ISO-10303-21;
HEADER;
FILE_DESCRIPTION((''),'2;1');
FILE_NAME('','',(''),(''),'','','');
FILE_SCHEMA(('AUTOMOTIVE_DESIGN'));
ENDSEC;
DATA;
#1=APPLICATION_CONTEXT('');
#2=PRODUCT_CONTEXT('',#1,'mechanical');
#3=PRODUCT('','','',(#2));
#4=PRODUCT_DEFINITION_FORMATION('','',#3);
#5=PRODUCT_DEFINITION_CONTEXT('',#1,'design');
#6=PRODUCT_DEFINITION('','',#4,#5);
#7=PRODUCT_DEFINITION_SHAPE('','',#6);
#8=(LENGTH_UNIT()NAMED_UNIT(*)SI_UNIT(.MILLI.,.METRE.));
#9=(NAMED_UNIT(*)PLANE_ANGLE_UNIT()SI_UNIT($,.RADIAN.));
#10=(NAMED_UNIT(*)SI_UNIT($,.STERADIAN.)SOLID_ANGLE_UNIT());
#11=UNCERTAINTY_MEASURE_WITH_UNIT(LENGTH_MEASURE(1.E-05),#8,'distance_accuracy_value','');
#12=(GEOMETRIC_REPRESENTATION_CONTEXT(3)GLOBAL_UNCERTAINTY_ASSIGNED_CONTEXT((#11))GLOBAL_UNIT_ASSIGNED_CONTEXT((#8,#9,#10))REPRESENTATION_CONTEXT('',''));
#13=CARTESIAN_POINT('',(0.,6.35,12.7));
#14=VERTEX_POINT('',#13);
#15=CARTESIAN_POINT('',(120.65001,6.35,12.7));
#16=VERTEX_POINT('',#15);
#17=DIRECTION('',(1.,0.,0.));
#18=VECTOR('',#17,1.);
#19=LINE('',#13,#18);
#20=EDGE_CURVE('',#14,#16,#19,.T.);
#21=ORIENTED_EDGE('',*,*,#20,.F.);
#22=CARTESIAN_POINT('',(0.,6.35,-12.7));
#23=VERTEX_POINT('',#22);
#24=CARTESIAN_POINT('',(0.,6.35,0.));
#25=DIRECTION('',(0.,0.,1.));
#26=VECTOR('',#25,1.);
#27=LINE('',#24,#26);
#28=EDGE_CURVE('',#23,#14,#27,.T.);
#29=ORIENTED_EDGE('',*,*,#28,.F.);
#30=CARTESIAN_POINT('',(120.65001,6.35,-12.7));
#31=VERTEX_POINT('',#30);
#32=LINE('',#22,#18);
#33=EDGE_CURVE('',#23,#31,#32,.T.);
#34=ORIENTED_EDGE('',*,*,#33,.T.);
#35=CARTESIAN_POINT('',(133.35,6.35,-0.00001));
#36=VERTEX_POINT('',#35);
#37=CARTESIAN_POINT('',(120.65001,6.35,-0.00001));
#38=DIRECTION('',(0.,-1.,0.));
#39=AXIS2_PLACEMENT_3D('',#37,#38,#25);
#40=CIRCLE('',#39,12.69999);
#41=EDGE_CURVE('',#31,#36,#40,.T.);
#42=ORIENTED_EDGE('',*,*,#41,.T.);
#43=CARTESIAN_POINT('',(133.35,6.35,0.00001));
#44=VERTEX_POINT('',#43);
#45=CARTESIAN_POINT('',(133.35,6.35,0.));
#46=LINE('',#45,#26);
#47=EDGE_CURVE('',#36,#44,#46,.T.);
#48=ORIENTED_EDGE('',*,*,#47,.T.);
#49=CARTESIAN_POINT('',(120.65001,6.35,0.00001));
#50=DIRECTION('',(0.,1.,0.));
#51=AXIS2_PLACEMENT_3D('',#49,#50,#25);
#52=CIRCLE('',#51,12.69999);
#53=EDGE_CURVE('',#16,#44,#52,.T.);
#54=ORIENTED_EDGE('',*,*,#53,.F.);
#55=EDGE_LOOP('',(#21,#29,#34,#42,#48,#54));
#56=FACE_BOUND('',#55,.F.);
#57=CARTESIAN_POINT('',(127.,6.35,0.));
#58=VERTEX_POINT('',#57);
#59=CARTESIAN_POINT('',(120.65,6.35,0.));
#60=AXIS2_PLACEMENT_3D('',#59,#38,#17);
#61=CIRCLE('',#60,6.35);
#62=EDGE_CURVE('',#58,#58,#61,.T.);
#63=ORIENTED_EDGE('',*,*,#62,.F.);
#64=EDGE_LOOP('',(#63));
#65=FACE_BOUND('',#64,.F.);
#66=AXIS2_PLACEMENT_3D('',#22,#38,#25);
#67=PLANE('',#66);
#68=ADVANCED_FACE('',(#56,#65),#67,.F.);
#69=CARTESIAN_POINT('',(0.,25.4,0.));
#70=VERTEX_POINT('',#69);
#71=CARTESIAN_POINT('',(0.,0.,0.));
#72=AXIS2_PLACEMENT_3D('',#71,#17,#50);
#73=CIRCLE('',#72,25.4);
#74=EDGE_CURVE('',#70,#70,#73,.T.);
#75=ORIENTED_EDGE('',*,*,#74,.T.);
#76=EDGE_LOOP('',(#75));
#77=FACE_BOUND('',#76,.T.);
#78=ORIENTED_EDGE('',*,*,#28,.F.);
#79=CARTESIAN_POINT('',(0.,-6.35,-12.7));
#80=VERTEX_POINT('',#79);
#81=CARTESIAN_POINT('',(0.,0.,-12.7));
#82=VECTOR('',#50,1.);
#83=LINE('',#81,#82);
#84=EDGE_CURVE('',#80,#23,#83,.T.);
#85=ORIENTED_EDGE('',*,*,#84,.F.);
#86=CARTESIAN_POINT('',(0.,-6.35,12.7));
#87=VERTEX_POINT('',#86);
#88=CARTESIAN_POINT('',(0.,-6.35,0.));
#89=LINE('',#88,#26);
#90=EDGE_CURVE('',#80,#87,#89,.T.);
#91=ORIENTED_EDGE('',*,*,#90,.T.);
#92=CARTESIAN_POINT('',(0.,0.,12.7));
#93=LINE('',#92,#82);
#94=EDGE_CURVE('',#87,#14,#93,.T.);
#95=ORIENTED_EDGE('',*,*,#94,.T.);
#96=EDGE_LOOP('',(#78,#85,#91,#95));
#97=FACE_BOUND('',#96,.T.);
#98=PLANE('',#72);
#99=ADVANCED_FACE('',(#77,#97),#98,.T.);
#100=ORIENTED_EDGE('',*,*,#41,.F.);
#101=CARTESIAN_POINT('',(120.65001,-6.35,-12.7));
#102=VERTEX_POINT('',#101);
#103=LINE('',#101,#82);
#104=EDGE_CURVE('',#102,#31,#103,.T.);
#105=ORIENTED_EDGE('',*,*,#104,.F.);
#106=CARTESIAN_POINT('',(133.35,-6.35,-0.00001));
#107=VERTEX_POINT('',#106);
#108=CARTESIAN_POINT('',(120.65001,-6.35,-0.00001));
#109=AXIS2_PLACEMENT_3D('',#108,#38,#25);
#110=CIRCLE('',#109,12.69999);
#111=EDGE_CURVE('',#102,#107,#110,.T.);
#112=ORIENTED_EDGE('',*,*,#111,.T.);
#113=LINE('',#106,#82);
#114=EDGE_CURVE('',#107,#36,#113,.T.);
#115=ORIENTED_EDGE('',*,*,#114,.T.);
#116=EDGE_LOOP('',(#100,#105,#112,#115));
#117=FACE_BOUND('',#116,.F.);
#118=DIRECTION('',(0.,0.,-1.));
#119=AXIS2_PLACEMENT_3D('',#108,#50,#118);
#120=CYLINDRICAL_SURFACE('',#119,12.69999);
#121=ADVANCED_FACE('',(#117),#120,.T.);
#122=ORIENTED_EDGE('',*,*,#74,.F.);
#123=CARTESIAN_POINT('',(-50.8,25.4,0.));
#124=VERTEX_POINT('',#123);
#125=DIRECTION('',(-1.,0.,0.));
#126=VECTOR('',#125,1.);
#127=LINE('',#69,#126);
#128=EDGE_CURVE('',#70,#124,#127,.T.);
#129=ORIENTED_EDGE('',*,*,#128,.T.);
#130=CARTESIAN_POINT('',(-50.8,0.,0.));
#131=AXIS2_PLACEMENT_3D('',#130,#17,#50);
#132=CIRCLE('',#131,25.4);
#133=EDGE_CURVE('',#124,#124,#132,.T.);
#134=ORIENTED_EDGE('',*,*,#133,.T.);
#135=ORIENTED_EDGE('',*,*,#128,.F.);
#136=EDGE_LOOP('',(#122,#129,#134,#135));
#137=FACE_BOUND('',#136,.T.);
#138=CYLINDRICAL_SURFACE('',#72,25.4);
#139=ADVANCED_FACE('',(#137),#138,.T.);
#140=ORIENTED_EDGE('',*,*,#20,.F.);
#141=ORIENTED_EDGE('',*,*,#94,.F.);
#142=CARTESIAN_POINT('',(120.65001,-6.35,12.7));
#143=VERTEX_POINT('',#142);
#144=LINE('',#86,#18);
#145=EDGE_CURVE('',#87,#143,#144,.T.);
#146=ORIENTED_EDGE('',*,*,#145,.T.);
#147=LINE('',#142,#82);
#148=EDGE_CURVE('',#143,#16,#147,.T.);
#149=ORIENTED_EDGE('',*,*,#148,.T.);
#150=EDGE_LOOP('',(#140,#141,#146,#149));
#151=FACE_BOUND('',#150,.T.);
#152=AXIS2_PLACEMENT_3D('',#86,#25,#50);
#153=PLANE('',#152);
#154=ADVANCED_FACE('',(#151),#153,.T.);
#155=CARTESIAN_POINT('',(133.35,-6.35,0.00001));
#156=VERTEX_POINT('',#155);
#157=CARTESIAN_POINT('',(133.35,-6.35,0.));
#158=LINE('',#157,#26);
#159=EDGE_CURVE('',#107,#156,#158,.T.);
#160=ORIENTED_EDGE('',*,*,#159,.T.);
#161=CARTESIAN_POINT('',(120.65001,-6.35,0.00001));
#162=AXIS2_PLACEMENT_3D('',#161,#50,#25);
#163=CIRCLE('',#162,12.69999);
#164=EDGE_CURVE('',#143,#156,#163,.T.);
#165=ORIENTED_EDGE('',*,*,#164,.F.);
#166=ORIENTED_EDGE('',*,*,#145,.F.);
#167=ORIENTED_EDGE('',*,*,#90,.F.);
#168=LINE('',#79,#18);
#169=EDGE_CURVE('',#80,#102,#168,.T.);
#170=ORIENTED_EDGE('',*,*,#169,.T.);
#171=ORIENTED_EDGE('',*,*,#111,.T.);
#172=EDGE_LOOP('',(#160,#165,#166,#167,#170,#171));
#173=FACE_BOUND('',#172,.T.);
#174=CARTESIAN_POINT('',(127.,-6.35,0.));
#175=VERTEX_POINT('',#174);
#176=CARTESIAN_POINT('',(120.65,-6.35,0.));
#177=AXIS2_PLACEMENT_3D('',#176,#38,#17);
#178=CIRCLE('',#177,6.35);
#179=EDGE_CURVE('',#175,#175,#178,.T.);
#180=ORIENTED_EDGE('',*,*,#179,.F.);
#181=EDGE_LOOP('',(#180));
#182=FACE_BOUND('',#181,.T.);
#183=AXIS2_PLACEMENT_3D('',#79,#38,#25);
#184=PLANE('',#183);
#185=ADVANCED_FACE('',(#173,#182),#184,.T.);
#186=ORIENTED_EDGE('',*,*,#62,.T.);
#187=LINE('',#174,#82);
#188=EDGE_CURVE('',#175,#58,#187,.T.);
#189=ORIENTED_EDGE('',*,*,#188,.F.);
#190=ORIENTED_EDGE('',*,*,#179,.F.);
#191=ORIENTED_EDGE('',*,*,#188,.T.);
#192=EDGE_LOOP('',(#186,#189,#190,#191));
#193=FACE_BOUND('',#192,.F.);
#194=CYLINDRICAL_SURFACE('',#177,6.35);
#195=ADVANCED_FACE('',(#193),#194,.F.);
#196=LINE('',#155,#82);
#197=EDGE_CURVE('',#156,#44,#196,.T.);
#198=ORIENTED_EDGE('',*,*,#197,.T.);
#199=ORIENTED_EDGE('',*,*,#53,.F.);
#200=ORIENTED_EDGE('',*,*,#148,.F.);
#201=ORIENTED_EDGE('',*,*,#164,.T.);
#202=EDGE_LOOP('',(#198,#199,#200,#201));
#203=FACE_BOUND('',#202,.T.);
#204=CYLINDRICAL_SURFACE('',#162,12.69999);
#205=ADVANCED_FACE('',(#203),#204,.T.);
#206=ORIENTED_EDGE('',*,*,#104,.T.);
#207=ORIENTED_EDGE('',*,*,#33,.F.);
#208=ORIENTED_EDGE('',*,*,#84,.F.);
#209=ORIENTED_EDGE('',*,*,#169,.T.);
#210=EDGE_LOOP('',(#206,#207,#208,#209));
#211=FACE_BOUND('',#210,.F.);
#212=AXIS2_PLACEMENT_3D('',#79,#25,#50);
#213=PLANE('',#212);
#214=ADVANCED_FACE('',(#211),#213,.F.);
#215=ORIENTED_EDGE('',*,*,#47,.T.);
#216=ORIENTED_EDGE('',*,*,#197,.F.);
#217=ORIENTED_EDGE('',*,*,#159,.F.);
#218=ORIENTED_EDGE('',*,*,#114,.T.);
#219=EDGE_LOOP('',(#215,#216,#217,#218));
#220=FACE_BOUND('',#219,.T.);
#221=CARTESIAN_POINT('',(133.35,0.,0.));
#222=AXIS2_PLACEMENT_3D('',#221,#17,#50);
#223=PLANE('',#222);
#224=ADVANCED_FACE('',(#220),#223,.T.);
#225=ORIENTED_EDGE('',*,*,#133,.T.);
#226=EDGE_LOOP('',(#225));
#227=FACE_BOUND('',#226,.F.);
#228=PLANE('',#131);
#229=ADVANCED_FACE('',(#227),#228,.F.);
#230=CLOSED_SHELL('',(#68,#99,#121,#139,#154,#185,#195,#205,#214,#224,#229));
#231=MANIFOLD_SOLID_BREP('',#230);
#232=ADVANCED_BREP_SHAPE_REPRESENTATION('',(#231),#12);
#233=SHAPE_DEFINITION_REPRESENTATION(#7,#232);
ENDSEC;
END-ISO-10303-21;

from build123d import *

# Parameters (mm, degrees)
F0_R     = 25.4
F1_DEPTH = 50.8
F2_W     = 12.7
F2_H     = 25.4
F3_DEPTH = 133.35
F4_R     = 12.69999
F5_R     = 6.35
F6_DEPTH = 31.751


# Not quite as in the source:
# - a fillet or chamfer is up to 0.001 mm smaller than in the source, because OpenCascade refuses the exact size


with BuildPart() as f1:
    # F0 (on Right) → F1 (new body)
    with BuildSketch(Plane.YZ):
        Circle(F0_R)
    extrude(amount=-F1_DEPTH)

    # F2 (on face) → F3 (join)
    with BuildSketch(Plane.YZ):
        Rectangle(F2_W, F2_H)
    extrude(amount=F3_DEPTH)

    # F4 (radius 12.7 in the source; OpenCascade refuses exactly that, so slightly less here)
    f4_edges = [f1.edges().sort_by_distance(p)[0] for p in [
        (133.35, 0, 12.7),
        (133.35, 0, -12.7),
    ]]
    fillet(f4_edges, radius=F4_R)

    # F5 (on face) → F6 (cut, through all)
    with BuildSketch(Plane.XZ.offset(6.35)):
        with Locations((120.65, 0)):
            Circle(F5_R)
    extrude(amount=-F6_DEPTH, mode=Mode.SUBTRACT)


solid = f1.part
